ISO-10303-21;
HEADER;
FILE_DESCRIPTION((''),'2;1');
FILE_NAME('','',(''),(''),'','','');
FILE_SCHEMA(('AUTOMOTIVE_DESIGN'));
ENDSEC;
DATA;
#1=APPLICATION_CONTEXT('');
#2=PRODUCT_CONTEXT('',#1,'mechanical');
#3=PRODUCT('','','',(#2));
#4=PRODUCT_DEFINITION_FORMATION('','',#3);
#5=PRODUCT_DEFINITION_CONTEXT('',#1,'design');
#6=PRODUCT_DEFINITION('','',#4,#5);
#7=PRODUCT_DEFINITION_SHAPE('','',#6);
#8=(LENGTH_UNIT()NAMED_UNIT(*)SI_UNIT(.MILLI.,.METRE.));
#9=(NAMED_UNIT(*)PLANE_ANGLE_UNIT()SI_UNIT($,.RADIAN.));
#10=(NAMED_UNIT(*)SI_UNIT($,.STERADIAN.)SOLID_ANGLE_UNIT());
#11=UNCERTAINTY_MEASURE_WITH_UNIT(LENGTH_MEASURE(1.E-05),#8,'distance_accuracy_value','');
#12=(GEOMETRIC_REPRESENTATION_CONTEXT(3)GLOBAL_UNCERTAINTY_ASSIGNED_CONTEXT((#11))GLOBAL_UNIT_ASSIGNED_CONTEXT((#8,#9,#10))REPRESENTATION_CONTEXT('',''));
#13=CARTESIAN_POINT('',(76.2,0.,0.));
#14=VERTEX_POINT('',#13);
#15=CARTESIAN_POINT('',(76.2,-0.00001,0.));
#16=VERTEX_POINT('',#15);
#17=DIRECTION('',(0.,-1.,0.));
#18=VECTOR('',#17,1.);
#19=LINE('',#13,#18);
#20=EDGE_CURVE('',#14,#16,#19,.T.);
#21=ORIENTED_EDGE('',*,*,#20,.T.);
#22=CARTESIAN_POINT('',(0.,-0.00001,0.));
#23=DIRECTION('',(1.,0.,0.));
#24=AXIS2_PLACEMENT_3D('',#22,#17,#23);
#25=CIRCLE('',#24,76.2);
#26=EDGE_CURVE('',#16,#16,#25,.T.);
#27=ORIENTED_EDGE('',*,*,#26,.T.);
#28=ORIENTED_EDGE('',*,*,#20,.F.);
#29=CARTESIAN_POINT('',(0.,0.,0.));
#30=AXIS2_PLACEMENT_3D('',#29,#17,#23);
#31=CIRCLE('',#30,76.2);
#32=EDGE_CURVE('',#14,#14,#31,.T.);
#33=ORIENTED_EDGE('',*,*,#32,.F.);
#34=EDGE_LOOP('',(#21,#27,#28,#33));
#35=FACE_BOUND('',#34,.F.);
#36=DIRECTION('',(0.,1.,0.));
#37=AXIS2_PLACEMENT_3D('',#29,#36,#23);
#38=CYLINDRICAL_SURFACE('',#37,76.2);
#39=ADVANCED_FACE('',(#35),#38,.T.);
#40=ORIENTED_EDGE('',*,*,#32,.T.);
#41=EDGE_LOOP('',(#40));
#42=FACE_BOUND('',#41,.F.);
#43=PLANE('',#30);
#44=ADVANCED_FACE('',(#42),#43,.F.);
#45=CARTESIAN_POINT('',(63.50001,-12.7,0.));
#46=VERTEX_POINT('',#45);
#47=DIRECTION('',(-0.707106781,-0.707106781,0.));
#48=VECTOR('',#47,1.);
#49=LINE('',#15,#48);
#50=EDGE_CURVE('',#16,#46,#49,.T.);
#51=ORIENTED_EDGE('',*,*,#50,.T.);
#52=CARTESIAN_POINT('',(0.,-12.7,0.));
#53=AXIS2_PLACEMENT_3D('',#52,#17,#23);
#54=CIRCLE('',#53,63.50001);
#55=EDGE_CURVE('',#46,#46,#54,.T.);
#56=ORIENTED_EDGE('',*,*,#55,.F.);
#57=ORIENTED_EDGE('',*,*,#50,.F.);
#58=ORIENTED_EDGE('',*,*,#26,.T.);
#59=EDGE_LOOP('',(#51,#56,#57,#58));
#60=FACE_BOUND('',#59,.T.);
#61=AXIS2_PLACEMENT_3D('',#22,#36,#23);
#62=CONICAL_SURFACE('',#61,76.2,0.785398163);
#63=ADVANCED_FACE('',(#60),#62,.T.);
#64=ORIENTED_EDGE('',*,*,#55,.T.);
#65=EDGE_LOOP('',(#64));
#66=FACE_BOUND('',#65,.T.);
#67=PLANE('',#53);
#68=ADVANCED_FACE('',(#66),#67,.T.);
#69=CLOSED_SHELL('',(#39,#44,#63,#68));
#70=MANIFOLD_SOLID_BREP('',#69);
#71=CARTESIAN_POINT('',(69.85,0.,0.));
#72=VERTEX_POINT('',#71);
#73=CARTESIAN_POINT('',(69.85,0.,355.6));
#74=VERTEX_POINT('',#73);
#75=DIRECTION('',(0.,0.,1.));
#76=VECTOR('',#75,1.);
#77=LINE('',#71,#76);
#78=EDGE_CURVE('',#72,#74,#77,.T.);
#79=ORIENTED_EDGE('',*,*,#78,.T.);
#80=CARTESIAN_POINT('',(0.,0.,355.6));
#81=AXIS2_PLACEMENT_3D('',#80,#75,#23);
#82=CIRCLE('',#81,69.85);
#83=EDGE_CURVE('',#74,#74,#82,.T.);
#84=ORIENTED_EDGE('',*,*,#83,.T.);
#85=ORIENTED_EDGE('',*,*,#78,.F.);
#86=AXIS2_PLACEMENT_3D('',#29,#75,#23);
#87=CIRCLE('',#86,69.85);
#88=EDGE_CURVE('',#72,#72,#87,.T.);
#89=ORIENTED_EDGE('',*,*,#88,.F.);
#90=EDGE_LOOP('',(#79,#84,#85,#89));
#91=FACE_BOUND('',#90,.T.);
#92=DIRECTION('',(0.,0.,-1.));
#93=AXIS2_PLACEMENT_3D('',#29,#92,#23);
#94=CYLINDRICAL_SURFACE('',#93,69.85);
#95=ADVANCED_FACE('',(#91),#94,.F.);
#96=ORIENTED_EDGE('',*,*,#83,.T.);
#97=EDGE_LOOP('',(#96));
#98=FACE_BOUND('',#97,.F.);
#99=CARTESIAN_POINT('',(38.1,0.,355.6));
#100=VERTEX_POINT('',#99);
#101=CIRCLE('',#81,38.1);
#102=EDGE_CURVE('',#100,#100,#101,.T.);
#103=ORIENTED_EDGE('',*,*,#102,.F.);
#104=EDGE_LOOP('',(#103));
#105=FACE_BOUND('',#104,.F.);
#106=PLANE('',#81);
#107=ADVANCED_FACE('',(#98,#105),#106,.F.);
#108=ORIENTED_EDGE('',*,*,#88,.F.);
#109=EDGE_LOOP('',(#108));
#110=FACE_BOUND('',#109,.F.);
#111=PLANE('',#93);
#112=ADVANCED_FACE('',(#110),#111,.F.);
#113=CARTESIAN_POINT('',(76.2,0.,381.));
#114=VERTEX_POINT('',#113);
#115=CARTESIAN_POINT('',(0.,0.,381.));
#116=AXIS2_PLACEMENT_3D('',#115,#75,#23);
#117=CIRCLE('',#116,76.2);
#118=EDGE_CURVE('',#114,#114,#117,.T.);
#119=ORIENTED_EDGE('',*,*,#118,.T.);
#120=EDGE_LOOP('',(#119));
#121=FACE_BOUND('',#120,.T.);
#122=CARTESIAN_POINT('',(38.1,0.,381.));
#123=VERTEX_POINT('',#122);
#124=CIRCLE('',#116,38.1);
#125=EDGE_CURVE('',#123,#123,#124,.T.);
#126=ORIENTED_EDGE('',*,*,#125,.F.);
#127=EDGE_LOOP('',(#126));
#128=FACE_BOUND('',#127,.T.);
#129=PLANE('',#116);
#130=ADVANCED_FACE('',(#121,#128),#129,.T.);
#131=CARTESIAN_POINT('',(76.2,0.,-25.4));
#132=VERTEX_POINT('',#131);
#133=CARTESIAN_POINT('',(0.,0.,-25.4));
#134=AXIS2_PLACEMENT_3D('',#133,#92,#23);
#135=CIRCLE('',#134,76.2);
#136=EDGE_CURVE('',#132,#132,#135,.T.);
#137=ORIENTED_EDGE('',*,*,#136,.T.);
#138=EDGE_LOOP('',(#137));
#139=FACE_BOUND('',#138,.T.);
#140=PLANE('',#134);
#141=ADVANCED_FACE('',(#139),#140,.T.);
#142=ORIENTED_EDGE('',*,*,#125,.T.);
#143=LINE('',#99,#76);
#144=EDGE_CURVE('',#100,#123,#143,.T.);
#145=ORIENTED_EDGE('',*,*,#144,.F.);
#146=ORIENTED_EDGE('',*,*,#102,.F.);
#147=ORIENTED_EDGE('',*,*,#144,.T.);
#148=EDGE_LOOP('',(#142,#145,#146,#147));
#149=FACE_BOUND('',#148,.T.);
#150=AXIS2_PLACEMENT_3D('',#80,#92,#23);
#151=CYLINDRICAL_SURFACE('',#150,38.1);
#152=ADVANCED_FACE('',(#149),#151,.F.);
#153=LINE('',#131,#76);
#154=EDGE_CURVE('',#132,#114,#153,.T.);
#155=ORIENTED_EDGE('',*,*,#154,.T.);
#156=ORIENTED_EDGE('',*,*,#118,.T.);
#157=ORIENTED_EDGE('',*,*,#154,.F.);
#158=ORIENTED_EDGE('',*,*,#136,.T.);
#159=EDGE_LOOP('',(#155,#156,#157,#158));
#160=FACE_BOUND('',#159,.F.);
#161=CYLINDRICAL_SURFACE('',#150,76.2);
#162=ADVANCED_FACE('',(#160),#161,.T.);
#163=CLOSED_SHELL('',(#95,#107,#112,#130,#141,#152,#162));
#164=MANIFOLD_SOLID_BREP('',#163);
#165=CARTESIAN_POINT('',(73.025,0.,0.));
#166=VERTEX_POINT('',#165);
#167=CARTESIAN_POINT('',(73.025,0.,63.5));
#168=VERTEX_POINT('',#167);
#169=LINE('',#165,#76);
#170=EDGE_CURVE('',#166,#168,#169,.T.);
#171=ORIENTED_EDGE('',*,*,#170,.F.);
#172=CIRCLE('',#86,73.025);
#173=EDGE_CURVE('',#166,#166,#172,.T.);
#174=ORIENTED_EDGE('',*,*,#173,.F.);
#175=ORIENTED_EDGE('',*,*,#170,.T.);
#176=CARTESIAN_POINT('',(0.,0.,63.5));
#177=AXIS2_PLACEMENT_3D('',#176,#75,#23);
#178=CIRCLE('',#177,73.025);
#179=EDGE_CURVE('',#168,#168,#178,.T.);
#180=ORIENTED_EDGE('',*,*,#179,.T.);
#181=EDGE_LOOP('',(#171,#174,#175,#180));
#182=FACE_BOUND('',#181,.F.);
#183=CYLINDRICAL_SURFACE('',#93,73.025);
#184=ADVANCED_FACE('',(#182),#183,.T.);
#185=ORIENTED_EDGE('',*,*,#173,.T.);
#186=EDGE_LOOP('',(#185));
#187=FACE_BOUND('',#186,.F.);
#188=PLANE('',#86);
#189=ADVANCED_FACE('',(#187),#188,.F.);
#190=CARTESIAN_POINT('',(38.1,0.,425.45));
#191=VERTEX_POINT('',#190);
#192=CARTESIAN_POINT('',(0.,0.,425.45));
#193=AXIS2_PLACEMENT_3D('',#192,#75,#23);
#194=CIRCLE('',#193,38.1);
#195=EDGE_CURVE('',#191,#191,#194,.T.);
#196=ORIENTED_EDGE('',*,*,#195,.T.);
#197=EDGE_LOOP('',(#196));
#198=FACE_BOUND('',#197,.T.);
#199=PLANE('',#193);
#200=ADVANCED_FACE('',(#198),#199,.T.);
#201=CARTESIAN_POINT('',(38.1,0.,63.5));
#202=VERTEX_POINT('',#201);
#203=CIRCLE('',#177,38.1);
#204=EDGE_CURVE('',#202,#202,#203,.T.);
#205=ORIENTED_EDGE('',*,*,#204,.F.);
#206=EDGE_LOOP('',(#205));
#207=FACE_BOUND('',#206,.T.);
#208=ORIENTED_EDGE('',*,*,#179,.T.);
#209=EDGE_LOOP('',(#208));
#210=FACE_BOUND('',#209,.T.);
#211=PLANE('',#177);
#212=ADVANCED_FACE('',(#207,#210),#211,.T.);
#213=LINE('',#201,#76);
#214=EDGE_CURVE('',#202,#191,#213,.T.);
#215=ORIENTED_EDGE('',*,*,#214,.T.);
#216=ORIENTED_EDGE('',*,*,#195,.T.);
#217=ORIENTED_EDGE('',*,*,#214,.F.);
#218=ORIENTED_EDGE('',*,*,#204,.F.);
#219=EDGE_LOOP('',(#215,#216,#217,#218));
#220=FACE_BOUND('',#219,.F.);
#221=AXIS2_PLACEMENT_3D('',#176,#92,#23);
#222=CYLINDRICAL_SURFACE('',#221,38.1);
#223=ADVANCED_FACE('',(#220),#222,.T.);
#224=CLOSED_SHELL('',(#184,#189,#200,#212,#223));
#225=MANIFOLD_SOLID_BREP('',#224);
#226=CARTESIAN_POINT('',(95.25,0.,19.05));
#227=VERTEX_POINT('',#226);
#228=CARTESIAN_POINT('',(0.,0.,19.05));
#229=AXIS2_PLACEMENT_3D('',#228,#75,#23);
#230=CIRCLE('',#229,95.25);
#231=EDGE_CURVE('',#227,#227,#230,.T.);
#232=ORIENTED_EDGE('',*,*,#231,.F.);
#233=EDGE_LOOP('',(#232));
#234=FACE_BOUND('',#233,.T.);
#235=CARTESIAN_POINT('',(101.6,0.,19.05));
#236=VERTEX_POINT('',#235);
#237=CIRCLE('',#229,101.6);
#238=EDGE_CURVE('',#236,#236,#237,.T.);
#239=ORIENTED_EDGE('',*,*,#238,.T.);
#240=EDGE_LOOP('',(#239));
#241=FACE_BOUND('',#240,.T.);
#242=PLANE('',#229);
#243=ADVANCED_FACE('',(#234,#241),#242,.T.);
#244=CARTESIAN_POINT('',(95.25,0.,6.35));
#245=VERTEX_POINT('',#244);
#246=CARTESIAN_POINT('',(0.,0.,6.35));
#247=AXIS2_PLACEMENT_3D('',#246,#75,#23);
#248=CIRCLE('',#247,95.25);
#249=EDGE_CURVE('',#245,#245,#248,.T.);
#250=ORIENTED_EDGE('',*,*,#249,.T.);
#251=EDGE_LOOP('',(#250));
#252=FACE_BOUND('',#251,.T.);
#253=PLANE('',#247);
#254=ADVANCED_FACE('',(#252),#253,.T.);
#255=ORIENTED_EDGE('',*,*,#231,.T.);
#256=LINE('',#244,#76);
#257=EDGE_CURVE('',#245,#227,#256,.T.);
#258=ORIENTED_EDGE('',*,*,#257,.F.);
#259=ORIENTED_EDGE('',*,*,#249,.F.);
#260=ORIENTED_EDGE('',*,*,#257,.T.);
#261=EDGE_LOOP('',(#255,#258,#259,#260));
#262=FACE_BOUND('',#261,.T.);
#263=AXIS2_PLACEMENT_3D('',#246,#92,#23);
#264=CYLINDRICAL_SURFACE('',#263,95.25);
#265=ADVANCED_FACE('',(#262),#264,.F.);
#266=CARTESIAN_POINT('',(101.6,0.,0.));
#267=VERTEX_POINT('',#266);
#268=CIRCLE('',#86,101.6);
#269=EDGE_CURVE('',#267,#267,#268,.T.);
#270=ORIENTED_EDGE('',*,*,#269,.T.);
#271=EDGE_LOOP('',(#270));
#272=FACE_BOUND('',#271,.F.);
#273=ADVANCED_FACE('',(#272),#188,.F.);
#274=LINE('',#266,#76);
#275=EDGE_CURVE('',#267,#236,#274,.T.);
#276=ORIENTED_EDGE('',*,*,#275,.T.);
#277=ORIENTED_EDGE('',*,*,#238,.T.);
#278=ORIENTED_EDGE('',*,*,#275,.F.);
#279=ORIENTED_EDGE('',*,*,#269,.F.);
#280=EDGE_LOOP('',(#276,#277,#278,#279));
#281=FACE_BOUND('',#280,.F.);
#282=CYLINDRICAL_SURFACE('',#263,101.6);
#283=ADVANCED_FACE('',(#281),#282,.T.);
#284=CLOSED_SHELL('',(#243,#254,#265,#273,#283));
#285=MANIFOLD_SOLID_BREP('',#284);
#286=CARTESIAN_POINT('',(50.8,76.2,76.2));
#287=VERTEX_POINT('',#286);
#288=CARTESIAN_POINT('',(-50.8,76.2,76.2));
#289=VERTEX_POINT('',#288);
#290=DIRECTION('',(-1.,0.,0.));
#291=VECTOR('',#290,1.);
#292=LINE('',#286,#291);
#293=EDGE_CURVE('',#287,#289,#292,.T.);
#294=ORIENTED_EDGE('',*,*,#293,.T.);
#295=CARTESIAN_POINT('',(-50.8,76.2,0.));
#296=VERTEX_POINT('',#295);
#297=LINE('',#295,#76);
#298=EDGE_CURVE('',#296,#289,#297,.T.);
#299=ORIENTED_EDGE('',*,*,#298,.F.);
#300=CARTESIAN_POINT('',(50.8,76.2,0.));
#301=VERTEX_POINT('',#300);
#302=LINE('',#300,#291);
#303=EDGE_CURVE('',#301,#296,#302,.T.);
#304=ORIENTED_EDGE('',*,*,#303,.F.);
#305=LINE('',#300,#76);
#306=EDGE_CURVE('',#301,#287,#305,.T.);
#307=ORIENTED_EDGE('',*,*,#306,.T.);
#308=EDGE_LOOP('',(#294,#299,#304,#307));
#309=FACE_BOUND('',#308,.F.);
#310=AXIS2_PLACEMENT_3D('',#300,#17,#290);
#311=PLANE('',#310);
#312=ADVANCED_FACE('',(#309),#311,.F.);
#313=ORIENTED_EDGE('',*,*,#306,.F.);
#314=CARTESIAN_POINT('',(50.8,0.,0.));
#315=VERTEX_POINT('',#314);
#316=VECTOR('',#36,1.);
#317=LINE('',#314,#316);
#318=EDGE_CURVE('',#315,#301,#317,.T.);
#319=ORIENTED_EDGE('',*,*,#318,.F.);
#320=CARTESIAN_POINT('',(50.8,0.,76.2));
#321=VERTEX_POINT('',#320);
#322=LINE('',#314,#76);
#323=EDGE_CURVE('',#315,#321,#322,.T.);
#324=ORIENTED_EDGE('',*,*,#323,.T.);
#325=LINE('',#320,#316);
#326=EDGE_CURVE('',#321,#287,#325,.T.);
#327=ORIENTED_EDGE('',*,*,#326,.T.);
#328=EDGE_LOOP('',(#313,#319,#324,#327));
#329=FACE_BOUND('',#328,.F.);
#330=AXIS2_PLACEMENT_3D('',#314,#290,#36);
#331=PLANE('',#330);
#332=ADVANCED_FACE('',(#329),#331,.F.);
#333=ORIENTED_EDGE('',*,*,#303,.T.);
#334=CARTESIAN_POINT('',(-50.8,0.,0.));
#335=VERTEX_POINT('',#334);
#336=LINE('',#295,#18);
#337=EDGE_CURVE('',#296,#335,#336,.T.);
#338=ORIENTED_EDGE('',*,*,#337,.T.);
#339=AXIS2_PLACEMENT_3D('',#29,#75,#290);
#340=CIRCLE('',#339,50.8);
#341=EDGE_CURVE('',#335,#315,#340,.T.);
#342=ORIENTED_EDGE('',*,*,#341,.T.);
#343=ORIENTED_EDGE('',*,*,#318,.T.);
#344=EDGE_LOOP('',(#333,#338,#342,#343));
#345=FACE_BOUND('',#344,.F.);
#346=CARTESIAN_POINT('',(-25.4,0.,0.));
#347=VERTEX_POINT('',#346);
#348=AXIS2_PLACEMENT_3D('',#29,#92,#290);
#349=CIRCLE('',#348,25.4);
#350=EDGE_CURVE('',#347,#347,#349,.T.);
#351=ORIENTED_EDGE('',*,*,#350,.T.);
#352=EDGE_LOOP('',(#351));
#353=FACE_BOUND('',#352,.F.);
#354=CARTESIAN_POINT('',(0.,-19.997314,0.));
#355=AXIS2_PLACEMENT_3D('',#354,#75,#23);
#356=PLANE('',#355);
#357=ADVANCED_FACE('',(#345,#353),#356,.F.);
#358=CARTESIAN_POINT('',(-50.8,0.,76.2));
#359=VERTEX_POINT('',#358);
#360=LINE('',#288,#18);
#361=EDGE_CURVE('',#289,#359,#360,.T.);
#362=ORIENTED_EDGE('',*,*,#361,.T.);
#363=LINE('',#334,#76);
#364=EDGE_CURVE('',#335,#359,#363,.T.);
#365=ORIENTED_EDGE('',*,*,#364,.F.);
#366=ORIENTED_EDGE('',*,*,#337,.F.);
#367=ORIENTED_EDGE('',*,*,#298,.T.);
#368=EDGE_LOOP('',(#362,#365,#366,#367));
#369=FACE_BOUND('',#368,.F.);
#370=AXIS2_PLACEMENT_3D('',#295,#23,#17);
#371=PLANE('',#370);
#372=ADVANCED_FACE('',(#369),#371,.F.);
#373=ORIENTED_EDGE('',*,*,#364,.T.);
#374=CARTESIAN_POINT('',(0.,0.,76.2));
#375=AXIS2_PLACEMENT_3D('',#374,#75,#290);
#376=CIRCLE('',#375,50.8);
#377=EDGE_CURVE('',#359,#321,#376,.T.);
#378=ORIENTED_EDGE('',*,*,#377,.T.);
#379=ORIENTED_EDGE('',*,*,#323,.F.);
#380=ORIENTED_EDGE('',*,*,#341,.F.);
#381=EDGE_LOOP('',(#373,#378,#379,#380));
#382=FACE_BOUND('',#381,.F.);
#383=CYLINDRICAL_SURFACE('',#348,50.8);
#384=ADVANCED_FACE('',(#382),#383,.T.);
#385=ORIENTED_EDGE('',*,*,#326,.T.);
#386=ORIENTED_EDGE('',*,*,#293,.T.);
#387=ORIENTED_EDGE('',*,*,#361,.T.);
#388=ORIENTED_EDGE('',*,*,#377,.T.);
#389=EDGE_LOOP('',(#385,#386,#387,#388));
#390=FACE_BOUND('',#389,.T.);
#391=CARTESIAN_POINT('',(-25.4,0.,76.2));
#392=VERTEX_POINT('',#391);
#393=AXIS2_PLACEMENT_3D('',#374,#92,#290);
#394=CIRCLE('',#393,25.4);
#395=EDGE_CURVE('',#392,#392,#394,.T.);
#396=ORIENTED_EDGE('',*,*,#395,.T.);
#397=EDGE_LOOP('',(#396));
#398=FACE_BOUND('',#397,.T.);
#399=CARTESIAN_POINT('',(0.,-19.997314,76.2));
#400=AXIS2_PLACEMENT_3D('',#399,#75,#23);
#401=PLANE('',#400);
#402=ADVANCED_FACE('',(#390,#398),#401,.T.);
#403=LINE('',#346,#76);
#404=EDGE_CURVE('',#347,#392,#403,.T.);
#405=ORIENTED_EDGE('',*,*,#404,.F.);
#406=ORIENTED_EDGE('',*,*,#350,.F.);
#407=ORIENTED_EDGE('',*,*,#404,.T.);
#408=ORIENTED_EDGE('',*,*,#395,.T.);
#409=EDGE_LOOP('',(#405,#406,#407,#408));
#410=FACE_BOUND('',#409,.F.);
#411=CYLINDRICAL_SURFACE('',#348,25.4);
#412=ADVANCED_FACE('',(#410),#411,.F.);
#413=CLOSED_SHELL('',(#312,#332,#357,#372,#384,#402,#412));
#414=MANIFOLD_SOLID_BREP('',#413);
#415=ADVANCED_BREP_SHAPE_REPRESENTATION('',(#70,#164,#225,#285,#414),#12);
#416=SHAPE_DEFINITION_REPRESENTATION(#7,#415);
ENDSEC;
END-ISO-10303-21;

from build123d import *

# Parameters (mm, degrees)
F1_DEPTH  = 76.2
F2_R      = 76.2
F3_DEPTH  = 12.7
F4_SIZE   = 12.69999
F5_R      = 76.2
F5_R_2    = 69.85
F6_DEPTH  = 355.6
F7_R      = 76.2
F8_DEPTH  = 25.4
F9_R      = 76.2
F9_R_2    = 38.1
F10_DEPTH = 25.4
F11_R     = 101.6
F12_DEPTH = 6.35
F13_R     = 101.6
F13_R_2   = 95.25
F14_DEPTH = 12.7
F15_R     = 73.025
F16_DEPTH = 63.5
F17_R     = 38.1
F18_DEPTH = 361.95


# Not quite as in the source:
# - a fillet or chamfer is up to 0.001 mm smaller than in the source, because OpenCascade refuses the exact size


with BuildPart() as f1:
    # F0 (on Top) → F1 (new body)
    with BuildSketch(Plane.XY):
        with BuildLine():
            Line((-25.4, 0), (-50.8, 0))
            ThreePointArc((-50.8, 0), (0, -50.8), (50.8, 0))
            Line((50.8, 0), (25.4, 0))
            ThreePointArc((25.4, 0), (0, -25.4), (-25.4, 0))
        make_face()
        with BuildLine():
            Line((-50.8, 76.2), (-50.8, 0))
            Line((-50.8, 0), (-25.4, 0))
            ThreePointArc((-25.4, 0), (0, 25.4), (25.4, 0))
            Line((25.4, 0), (50.8, 0))
            Line((50.8, 0), (50.8, 76.2))
            Line((50.8, 76.2), (-50.8, 76.2))
        make_face()
    extrude(amount=F1_DEPTH)


with BuildPart() as f3:
    # F2 (on Front) → F3 (new body)
    with BuildSketch(Plane.XZ):
        Circle(F2_R)
    extrude(amount=F3_DEPTH)

    # F4 (size 12.7 in the source; OpenCascade refuses exactly that, so slightly less here)
    f4_edges = [f3.edges().sort_by_distance(p)[0] for p in [
        (-76.2, -12.7, 0),
    ]]
    chamfer(f4_edges, length=F4_SIZE)


with BuildPart() as f6:
    # F5 (on Top) → F6 (new body)
    with BuildSketch(Plane.XY):
        Circle(F5_R)
        Circle(F5_R_2, mode=Mode.SUBTRACT)
    extrude(amount=F6_DEPTH)

    # F7 (on face) → F8 (join)
    with BuildSketch(Plane(origin=(0, 0, 0), x_dir=(1, 0, 0), z_dir=(0, 0, -1))):
        Circle(F7_R)
    extrude(amount=F8_DEPTH)

    # F9 (on face) → F10 (join)
    with BuildSketch(Plane.XY.offset(355.6)):
        Circle(F9_R)
        Circle(F9_R_2, mode=Mode.SUBTRACT)
    extrude(amount=F10_DEPTH)


with BuildPart() as f12:
    # F11 (on Top) → F12 (new body)
    with BuildSketch(Plane.XY):
        Circle(F11_R)
    extrude(amount=F12_DEPTH)

    # F13 (on face) → F14 (join)
    with BuildSketch(Plane.XY.offset(6.35)):
        Circle(F13_R)
        Circle(F13_R_2, mode=Mode.SUBTRACT)
    extrude(amount=F14_DEPTH)


with BuildPart() as f16:
    # F15 (on Top) → F16 (new body)
    with BuildSketch(Plane.XY):
        Circle(F15_R)
    extrude(amount=F16_DEPTH)

    # F17 (on face) → F18 (join)
    with BuildSketch(Plane.XY.offset(63.5)):
        Circle(F17_R)
    extrude(amount=F18_DEPTH)


solid = Compound([f1.part, f3.part, f6.part, f12.part, f16.part])
